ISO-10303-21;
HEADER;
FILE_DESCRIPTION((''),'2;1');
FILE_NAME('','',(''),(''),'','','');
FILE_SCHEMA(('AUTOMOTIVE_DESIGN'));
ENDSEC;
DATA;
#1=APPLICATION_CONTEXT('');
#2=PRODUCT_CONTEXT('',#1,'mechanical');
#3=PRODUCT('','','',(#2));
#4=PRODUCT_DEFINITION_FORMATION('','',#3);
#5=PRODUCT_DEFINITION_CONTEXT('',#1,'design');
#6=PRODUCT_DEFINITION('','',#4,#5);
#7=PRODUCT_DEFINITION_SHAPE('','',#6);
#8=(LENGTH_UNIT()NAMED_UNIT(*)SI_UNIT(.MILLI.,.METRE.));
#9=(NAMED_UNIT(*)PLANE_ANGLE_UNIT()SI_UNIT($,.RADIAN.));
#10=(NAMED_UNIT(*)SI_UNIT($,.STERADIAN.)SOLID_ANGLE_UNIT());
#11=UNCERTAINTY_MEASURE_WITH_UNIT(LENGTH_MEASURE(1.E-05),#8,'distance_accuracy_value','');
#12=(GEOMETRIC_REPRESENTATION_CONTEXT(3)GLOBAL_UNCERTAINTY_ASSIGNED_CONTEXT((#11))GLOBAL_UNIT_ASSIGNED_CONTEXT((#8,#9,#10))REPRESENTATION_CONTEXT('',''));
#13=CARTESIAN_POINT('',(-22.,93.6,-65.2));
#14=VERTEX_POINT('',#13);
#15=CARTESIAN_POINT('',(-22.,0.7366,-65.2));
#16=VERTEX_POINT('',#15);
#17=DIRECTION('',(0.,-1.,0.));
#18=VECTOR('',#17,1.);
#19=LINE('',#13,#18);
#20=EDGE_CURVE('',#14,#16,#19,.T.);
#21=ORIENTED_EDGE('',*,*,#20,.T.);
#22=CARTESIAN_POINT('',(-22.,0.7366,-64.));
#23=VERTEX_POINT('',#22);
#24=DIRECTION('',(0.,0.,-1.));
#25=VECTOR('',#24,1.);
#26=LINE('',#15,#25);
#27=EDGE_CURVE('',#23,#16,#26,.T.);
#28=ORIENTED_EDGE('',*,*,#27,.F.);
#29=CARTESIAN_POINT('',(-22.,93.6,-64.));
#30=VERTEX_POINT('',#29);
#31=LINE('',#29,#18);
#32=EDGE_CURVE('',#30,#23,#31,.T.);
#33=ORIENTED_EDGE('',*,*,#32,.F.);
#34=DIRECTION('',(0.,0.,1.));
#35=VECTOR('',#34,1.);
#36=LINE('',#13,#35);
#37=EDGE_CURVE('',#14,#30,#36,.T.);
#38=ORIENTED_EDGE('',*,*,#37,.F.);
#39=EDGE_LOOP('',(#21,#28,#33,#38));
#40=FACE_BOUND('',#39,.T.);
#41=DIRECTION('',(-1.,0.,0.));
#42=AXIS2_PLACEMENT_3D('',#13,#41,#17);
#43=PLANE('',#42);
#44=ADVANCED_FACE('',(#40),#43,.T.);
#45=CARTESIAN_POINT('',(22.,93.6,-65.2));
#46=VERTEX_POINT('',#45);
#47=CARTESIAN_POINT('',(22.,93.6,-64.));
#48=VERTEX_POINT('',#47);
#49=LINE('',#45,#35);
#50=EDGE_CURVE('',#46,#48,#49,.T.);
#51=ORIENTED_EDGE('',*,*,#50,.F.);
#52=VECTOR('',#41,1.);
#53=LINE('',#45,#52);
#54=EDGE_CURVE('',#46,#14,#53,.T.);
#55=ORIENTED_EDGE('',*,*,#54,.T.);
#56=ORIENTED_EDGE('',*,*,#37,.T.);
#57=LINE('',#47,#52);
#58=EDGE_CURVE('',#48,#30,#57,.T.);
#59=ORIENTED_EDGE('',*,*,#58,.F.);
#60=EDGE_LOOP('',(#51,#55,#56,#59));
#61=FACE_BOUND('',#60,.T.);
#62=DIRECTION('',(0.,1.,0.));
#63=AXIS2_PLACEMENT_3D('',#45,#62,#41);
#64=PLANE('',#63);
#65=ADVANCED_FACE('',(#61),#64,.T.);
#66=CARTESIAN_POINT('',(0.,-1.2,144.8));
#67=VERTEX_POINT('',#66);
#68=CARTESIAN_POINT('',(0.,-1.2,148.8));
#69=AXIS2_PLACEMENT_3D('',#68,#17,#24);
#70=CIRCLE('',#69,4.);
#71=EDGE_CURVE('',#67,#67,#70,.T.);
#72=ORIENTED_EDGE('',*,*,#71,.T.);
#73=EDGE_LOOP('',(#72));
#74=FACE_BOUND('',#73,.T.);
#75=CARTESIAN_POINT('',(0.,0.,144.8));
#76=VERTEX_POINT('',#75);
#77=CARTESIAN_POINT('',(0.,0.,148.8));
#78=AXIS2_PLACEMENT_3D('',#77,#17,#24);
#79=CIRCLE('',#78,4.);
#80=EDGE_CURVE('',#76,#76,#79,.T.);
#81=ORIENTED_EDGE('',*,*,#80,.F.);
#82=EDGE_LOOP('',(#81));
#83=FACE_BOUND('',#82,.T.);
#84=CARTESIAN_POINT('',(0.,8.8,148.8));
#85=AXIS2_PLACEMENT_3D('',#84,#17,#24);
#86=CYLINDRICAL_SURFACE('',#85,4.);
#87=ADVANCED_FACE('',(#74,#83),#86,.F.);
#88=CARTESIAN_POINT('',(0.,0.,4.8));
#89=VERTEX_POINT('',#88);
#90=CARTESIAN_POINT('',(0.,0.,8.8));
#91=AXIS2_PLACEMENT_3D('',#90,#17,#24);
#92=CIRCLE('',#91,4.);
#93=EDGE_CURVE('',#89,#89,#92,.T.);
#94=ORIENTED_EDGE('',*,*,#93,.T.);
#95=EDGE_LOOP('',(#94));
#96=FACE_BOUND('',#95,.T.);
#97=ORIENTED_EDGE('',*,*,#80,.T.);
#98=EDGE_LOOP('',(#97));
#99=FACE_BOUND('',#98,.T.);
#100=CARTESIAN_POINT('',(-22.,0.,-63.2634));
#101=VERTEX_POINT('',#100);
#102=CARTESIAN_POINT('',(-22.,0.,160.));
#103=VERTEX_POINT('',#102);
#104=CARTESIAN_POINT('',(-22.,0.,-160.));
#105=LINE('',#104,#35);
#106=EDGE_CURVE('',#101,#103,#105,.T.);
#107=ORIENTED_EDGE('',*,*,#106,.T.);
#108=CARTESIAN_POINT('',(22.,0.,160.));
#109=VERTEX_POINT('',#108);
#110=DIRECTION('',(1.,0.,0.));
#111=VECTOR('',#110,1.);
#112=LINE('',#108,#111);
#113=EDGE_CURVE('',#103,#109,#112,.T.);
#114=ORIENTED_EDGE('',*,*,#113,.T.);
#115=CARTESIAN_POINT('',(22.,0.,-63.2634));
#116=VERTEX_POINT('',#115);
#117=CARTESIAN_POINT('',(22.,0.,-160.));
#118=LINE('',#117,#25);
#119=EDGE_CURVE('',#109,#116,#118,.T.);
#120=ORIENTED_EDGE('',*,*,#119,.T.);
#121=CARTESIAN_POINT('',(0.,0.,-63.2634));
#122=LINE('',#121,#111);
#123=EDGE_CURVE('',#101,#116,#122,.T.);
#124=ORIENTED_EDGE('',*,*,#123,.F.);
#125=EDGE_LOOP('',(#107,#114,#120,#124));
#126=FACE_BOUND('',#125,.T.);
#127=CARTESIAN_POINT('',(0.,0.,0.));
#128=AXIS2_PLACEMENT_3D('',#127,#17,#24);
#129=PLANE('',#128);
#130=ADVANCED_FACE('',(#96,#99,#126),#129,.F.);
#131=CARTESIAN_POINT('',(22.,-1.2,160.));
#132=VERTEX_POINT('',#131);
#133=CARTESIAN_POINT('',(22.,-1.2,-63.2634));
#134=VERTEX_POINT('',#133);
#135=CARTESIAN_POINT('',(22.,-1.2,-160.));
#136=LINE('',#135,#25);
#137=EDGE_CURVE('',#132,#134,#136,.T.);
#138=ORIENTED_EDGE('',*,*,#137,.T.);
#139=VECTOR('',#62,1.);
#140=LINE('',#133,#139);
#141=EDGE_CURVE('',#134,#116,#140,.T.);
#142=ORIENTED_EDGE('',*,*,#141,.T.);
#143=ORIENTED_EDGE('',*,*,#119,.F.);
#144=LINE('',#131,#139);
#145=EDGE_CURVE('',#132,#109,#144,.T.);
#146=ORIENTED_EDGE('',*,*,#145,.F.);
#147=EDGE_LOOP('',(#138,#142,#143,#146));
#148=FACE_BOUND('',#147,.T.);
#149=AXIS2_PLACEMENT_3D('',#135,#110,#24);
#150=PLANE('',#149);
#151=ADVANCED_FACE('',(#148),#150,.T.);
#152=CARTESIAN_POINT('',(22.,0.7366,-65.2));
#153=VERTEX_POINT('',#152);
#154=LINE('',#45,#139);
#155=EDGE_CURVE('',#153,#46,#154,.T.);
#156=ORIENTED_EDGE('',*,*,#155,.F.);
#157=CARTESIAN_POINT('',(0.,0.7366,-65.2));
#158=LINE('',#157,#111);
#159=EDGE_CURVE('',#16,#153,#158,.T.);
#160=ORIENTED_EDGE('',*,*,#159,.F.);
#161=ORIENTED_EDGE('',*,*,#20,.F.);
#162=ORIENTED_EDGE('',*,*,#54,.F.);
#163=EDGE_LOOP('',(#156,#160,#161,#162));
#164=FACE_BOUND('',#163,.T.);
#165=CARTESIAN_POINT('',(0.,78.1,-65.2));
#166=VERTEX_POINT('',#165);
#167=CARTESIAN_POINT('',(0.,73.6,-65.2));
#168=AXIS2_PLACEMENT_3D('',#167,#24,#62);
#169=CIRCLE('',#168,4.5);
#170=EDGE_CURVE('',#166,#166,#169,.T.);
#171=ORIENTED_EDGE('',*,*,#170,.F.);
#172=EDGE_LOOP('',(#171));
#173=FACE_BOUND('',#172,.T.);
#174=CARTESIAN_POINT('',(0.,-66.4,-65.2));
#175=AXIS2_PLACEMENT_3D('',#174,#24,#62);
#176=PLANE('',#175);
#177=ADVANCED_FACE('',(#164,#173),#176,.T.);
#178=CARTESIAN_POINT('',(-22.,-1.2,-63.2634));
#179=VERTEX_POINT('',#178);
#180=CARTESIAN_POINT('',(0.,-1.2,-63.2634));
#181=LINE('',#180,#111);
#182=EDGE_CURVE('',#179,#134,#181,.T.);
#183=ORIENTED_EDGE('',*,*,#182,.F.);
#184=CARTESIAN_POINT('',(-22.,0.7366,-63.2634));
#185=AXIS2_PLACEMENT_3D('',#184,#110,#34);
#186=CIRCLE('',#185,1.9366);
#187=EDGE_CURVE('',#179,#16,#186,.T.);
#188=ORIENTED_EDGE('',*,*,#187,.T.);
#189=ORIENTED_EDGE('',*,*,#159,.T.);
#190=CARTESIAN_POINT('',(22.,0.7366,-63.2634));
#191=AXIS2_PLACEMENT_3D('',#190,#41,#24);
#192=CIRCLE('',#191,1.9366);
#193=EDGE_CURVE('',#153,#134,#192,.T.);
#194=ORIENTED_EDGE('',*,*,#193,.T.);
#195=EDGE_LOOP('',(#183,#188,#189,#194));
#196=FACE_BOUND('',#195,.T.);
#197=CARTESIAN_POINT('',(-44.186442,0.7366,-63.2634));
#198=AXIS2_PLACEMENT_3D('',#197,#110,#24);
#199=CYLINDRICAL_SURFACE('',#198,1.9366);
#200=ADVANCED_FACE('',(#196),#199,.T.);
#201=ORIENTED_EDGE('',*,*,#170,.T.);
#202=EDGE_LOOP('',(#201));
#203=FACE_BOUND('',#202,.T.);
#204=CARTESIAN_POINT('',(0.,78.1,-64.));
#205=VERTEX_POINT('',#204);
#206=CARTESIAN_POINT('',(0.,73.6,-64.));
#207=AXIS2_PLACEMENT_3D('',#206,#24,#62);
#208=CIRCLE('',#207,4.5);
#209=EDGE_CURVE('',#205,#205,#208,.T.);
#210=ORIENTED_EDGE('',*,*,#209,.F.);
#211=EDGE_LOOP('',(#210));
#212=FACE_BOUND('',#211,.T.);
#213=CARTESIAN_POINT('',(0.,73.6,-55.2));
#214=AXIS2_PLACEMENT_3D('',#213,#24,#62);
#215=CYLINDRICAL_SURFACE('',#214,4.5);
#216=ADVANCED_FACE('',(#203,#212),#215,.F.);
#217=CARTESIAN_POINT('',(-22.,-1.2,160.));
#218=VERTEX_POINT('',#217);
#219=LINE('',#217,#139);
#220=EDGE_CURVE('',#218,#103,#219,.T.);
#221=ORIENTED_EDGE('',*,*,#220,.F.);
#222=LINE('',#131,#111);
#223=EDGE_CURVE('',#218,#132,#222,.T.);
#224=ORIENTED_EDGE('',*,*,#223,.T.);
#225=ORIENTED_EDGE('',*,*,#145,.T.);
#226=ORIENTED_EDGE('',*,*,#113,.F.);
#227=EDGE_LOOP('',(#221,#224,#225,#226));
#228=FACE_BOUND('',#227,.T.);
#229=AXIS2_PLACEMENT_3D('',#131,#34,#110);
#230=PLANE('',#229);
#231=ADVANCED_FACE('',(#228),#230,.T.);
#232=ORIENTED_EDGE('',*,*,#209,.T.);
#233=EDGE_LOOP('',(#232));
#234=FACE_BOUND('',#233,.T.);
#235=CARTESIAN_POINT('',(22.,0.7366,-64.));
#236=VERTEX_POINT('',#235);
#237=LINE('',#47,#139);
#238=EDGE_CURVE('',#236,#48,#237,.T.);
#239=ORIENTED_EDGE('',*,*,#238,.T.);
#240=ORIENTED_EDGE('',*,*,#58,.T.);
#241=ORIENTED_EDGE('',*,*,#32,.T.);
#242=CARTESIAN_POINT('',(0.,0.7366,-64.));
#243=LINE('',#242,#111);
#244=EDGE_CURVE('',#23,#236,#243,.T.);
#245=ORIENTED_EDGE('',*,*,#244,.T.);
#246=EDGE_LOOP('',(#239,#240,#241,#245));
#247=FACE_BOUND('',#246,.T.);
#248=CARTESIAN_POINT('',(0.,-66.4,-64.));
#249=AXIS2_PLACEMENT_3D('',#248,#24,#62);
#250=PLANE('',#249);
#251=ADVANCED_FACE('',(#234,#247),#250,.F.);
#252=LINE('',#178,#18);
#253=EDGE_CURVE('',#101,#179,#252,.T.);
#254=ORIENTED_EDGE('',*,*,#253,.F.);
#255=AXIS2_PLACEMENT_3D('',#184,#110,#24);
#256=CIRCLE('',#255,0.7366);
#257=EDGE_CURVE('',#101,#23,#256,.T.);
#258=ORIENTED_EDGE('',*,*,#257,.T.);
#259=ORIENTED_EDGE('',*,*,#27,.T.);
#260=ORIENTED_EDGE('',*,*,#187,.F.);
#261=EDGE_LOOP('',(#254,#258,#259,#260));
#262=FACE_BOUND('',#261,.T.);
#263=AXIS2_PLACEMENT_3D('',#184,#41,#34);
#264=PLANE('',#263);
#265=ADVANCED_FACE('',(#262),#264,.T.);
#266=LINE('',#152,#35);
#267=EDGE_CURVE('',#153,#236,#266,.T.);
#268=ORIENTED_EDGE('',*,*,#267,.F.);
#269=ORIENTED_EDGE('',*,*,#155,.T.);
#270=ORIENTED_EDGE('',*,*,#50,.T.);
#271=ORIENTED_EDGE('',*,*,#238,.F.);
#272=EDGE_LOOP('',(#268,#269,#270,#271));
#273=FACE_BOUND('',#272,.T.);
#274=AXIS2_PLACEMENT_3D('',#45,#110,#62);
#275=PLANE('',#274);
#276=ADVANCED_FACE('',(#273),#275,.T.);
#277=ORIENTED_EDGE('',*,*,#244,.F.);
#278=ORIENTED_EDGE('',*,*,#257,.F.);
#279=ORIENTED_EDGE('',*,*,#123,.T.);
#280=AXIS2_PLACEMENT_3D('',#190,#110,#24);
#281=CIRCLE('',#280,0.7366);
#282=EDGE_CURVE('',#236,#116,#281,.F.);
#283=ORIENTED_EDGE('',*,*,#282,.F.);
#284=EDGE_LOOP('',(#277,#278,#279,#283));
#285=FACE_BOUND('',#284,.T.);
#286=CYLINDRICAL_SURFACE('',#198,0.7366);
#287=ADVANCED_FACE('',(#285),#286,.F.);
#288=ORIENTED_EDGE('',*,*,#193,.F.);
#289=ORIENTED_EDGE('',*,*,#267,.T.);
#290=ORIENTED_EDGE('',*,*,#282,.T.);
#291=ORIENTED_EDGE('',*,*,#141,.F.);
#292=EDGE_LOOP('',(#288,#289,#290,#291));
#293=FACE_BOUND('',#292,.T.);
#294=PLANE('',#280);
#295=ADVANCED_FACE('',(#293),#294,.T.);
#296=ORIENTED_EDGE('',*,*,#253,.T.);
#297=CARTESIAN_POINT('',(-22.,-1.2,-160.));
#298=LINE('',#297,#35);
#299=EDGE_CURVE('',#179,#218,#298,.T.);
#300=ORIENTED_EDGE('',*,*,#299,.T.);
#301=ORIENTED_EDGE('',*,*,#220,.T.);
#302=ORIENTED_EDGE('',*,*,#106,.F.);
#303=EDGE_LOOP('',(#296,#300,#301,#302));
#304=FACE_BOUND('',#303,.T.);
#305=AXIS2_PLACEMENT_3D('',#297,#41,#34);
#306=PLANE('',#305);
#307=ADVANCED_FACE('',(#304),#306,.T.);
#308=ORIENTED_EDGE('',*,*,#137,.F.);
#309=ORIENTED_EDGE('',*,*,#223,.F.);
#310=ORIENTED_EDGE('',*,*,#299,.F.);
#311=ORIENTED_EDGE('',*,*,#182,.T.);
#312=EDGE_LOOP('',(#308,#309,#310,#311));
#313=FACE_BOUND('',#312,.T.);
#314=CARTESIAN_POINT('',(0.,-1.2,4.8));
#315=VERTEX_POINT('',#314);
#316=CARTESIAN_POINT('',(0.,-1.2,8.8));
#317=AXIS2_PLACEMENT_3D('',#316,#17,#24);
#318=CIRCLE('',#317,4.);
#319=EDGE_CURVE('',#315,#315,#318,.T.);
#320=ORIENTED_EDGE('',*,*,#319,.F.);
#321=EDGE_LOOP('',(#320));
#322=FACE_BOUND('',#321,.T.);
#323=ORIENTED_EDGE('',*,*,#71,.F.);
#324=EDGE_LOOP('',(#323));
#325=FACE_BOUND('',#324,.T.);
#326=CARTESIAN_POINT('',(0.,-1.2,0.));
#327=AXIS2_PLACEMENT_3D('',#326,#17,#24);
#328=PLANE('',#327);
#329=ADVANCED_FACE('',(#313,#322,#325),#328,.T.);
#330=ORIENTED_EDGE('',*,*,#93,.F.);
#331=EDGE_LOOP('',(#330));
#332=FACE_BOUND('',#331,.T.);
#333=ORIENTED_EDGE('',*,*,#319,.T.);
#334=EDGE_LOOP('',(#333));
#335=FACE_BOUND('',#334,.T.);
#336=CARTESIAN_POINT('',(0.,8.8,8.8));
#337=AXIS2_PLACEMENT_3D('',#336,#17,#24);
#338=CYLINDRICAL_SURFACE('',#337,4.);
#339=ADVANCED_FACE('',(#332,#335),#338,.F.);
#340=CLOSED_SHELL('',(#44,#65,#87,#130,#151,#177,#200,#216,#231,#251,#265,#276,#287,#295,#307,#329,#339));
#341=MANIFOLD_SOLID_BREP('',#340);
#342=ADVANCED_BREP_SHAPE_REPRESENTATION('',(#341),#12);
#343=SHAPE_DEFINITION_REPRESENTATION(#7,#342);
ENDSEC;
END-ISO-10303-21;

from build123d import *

# Parameters (mm, degrees)
SKETCH1_W              = 44
SKETCH1_H              = 320
BASE_FLANGE1_DEPTH     = 1.2
SKETCHED_START         = -22
SKETCHED_BEND1_DEPTH   = 44
SKETCHED_BEND1_2_DEPTH = 44
SKETCH7_R              = 4.5
CUT_EXTRUDE1_DEPTH     = 10
SKETCH8_R              = 4
CUT_EXTRUDE2_DEPTH     = 10


# Read off the part's stored shape, not the designer's step: Sketched Bend1
# Sheet-metal steps are written as plain solids
with BuildPart() as part:
    # Sketch1 → Base-Flange1 (new body)
    with BuildSketch(Plane(origin=(0, 0, 0), x_dir=(1, 0, 0), z_dir=(0, 1, 0))):
        Rectangle(SKETCH1_W, SKETCH1_H)
    extrude(amount=-BASE_FLANGE1_DEPTH)

    # Sketched Bend1 outline → Sketched Bend1 (cut)
    with BuildSketch(Plane.YZ.offset(SKETCHED_START)):
        with BuildLine():
            Line((0, -160), (0, -65.054444388))
            ThreePointArc((0, -65.054444388), (-0.872269031, -64.341342484), (-1.2, -63.2634))
            Line((-1.2, -63.2634), (-1.2, -160))
            Line((-1.2, -160), (0, -160))
        make_face()
    extrude(amount=SKETCHED_BEND1_DEPTH, mode=Mode.SUBTRACT)

    # Sketched Bend1 2 outline → Sketched Bend1 2 (add)
    with BuildSketch(Plane.YZ.offset(SKETCHED_START)):
        with BuildLine():
            Line((93.6, -64), (0.7366, -64))
            ThreePointArc((0.7366, -64), (0.215745145, -63.784254855), (0, -63.2634))
            Line((0, -63.2634), (0, -65.054444388))
            ThreePointArc((0, -65.054444388), (0.361178238, -65.163262642), (0.7366, -65.2))
            Line((0.7366, -65.2), (93.6, -65.2))
            Line((93.6, -65.2), (93.6, -64))
        make_face()
    extrude(amount=SKETCHED_BEND1_2_DEPTH)

    # Sketch7 → Cut-Extrude1 (cut)
    with BuildSketch(Plane(origin=(0, 0, -65.2), x_dir=(-1, 0, 0), z_dir=(0, 0, -1))):
        with Locations(Location((0, 73.6, 0), (0, 0, 90))):
            Circle(SKETCH7_R)
    extrude(amount=-CUT_EXTRUDE1_DEPTH, mode=Mode.SUBTRACT)

    # Sketch8 → Cut-Extrude2 (cut)
    with BuildSketch(Plane.XZ.offset(1.2)):
        with Locations(Location((0, 8.8, 0), (0, 0, 270))):
            Circle(SKETCH8_R)
        with Locations(Location((0, 148.8, 0), (0, 0, 270))):
            Circle(SKETCH8_R)
    extrude(amount=-CUT_EXTRUDE2_DEPTH, mode=Mode.SUBTRACT)


solid = part.part
